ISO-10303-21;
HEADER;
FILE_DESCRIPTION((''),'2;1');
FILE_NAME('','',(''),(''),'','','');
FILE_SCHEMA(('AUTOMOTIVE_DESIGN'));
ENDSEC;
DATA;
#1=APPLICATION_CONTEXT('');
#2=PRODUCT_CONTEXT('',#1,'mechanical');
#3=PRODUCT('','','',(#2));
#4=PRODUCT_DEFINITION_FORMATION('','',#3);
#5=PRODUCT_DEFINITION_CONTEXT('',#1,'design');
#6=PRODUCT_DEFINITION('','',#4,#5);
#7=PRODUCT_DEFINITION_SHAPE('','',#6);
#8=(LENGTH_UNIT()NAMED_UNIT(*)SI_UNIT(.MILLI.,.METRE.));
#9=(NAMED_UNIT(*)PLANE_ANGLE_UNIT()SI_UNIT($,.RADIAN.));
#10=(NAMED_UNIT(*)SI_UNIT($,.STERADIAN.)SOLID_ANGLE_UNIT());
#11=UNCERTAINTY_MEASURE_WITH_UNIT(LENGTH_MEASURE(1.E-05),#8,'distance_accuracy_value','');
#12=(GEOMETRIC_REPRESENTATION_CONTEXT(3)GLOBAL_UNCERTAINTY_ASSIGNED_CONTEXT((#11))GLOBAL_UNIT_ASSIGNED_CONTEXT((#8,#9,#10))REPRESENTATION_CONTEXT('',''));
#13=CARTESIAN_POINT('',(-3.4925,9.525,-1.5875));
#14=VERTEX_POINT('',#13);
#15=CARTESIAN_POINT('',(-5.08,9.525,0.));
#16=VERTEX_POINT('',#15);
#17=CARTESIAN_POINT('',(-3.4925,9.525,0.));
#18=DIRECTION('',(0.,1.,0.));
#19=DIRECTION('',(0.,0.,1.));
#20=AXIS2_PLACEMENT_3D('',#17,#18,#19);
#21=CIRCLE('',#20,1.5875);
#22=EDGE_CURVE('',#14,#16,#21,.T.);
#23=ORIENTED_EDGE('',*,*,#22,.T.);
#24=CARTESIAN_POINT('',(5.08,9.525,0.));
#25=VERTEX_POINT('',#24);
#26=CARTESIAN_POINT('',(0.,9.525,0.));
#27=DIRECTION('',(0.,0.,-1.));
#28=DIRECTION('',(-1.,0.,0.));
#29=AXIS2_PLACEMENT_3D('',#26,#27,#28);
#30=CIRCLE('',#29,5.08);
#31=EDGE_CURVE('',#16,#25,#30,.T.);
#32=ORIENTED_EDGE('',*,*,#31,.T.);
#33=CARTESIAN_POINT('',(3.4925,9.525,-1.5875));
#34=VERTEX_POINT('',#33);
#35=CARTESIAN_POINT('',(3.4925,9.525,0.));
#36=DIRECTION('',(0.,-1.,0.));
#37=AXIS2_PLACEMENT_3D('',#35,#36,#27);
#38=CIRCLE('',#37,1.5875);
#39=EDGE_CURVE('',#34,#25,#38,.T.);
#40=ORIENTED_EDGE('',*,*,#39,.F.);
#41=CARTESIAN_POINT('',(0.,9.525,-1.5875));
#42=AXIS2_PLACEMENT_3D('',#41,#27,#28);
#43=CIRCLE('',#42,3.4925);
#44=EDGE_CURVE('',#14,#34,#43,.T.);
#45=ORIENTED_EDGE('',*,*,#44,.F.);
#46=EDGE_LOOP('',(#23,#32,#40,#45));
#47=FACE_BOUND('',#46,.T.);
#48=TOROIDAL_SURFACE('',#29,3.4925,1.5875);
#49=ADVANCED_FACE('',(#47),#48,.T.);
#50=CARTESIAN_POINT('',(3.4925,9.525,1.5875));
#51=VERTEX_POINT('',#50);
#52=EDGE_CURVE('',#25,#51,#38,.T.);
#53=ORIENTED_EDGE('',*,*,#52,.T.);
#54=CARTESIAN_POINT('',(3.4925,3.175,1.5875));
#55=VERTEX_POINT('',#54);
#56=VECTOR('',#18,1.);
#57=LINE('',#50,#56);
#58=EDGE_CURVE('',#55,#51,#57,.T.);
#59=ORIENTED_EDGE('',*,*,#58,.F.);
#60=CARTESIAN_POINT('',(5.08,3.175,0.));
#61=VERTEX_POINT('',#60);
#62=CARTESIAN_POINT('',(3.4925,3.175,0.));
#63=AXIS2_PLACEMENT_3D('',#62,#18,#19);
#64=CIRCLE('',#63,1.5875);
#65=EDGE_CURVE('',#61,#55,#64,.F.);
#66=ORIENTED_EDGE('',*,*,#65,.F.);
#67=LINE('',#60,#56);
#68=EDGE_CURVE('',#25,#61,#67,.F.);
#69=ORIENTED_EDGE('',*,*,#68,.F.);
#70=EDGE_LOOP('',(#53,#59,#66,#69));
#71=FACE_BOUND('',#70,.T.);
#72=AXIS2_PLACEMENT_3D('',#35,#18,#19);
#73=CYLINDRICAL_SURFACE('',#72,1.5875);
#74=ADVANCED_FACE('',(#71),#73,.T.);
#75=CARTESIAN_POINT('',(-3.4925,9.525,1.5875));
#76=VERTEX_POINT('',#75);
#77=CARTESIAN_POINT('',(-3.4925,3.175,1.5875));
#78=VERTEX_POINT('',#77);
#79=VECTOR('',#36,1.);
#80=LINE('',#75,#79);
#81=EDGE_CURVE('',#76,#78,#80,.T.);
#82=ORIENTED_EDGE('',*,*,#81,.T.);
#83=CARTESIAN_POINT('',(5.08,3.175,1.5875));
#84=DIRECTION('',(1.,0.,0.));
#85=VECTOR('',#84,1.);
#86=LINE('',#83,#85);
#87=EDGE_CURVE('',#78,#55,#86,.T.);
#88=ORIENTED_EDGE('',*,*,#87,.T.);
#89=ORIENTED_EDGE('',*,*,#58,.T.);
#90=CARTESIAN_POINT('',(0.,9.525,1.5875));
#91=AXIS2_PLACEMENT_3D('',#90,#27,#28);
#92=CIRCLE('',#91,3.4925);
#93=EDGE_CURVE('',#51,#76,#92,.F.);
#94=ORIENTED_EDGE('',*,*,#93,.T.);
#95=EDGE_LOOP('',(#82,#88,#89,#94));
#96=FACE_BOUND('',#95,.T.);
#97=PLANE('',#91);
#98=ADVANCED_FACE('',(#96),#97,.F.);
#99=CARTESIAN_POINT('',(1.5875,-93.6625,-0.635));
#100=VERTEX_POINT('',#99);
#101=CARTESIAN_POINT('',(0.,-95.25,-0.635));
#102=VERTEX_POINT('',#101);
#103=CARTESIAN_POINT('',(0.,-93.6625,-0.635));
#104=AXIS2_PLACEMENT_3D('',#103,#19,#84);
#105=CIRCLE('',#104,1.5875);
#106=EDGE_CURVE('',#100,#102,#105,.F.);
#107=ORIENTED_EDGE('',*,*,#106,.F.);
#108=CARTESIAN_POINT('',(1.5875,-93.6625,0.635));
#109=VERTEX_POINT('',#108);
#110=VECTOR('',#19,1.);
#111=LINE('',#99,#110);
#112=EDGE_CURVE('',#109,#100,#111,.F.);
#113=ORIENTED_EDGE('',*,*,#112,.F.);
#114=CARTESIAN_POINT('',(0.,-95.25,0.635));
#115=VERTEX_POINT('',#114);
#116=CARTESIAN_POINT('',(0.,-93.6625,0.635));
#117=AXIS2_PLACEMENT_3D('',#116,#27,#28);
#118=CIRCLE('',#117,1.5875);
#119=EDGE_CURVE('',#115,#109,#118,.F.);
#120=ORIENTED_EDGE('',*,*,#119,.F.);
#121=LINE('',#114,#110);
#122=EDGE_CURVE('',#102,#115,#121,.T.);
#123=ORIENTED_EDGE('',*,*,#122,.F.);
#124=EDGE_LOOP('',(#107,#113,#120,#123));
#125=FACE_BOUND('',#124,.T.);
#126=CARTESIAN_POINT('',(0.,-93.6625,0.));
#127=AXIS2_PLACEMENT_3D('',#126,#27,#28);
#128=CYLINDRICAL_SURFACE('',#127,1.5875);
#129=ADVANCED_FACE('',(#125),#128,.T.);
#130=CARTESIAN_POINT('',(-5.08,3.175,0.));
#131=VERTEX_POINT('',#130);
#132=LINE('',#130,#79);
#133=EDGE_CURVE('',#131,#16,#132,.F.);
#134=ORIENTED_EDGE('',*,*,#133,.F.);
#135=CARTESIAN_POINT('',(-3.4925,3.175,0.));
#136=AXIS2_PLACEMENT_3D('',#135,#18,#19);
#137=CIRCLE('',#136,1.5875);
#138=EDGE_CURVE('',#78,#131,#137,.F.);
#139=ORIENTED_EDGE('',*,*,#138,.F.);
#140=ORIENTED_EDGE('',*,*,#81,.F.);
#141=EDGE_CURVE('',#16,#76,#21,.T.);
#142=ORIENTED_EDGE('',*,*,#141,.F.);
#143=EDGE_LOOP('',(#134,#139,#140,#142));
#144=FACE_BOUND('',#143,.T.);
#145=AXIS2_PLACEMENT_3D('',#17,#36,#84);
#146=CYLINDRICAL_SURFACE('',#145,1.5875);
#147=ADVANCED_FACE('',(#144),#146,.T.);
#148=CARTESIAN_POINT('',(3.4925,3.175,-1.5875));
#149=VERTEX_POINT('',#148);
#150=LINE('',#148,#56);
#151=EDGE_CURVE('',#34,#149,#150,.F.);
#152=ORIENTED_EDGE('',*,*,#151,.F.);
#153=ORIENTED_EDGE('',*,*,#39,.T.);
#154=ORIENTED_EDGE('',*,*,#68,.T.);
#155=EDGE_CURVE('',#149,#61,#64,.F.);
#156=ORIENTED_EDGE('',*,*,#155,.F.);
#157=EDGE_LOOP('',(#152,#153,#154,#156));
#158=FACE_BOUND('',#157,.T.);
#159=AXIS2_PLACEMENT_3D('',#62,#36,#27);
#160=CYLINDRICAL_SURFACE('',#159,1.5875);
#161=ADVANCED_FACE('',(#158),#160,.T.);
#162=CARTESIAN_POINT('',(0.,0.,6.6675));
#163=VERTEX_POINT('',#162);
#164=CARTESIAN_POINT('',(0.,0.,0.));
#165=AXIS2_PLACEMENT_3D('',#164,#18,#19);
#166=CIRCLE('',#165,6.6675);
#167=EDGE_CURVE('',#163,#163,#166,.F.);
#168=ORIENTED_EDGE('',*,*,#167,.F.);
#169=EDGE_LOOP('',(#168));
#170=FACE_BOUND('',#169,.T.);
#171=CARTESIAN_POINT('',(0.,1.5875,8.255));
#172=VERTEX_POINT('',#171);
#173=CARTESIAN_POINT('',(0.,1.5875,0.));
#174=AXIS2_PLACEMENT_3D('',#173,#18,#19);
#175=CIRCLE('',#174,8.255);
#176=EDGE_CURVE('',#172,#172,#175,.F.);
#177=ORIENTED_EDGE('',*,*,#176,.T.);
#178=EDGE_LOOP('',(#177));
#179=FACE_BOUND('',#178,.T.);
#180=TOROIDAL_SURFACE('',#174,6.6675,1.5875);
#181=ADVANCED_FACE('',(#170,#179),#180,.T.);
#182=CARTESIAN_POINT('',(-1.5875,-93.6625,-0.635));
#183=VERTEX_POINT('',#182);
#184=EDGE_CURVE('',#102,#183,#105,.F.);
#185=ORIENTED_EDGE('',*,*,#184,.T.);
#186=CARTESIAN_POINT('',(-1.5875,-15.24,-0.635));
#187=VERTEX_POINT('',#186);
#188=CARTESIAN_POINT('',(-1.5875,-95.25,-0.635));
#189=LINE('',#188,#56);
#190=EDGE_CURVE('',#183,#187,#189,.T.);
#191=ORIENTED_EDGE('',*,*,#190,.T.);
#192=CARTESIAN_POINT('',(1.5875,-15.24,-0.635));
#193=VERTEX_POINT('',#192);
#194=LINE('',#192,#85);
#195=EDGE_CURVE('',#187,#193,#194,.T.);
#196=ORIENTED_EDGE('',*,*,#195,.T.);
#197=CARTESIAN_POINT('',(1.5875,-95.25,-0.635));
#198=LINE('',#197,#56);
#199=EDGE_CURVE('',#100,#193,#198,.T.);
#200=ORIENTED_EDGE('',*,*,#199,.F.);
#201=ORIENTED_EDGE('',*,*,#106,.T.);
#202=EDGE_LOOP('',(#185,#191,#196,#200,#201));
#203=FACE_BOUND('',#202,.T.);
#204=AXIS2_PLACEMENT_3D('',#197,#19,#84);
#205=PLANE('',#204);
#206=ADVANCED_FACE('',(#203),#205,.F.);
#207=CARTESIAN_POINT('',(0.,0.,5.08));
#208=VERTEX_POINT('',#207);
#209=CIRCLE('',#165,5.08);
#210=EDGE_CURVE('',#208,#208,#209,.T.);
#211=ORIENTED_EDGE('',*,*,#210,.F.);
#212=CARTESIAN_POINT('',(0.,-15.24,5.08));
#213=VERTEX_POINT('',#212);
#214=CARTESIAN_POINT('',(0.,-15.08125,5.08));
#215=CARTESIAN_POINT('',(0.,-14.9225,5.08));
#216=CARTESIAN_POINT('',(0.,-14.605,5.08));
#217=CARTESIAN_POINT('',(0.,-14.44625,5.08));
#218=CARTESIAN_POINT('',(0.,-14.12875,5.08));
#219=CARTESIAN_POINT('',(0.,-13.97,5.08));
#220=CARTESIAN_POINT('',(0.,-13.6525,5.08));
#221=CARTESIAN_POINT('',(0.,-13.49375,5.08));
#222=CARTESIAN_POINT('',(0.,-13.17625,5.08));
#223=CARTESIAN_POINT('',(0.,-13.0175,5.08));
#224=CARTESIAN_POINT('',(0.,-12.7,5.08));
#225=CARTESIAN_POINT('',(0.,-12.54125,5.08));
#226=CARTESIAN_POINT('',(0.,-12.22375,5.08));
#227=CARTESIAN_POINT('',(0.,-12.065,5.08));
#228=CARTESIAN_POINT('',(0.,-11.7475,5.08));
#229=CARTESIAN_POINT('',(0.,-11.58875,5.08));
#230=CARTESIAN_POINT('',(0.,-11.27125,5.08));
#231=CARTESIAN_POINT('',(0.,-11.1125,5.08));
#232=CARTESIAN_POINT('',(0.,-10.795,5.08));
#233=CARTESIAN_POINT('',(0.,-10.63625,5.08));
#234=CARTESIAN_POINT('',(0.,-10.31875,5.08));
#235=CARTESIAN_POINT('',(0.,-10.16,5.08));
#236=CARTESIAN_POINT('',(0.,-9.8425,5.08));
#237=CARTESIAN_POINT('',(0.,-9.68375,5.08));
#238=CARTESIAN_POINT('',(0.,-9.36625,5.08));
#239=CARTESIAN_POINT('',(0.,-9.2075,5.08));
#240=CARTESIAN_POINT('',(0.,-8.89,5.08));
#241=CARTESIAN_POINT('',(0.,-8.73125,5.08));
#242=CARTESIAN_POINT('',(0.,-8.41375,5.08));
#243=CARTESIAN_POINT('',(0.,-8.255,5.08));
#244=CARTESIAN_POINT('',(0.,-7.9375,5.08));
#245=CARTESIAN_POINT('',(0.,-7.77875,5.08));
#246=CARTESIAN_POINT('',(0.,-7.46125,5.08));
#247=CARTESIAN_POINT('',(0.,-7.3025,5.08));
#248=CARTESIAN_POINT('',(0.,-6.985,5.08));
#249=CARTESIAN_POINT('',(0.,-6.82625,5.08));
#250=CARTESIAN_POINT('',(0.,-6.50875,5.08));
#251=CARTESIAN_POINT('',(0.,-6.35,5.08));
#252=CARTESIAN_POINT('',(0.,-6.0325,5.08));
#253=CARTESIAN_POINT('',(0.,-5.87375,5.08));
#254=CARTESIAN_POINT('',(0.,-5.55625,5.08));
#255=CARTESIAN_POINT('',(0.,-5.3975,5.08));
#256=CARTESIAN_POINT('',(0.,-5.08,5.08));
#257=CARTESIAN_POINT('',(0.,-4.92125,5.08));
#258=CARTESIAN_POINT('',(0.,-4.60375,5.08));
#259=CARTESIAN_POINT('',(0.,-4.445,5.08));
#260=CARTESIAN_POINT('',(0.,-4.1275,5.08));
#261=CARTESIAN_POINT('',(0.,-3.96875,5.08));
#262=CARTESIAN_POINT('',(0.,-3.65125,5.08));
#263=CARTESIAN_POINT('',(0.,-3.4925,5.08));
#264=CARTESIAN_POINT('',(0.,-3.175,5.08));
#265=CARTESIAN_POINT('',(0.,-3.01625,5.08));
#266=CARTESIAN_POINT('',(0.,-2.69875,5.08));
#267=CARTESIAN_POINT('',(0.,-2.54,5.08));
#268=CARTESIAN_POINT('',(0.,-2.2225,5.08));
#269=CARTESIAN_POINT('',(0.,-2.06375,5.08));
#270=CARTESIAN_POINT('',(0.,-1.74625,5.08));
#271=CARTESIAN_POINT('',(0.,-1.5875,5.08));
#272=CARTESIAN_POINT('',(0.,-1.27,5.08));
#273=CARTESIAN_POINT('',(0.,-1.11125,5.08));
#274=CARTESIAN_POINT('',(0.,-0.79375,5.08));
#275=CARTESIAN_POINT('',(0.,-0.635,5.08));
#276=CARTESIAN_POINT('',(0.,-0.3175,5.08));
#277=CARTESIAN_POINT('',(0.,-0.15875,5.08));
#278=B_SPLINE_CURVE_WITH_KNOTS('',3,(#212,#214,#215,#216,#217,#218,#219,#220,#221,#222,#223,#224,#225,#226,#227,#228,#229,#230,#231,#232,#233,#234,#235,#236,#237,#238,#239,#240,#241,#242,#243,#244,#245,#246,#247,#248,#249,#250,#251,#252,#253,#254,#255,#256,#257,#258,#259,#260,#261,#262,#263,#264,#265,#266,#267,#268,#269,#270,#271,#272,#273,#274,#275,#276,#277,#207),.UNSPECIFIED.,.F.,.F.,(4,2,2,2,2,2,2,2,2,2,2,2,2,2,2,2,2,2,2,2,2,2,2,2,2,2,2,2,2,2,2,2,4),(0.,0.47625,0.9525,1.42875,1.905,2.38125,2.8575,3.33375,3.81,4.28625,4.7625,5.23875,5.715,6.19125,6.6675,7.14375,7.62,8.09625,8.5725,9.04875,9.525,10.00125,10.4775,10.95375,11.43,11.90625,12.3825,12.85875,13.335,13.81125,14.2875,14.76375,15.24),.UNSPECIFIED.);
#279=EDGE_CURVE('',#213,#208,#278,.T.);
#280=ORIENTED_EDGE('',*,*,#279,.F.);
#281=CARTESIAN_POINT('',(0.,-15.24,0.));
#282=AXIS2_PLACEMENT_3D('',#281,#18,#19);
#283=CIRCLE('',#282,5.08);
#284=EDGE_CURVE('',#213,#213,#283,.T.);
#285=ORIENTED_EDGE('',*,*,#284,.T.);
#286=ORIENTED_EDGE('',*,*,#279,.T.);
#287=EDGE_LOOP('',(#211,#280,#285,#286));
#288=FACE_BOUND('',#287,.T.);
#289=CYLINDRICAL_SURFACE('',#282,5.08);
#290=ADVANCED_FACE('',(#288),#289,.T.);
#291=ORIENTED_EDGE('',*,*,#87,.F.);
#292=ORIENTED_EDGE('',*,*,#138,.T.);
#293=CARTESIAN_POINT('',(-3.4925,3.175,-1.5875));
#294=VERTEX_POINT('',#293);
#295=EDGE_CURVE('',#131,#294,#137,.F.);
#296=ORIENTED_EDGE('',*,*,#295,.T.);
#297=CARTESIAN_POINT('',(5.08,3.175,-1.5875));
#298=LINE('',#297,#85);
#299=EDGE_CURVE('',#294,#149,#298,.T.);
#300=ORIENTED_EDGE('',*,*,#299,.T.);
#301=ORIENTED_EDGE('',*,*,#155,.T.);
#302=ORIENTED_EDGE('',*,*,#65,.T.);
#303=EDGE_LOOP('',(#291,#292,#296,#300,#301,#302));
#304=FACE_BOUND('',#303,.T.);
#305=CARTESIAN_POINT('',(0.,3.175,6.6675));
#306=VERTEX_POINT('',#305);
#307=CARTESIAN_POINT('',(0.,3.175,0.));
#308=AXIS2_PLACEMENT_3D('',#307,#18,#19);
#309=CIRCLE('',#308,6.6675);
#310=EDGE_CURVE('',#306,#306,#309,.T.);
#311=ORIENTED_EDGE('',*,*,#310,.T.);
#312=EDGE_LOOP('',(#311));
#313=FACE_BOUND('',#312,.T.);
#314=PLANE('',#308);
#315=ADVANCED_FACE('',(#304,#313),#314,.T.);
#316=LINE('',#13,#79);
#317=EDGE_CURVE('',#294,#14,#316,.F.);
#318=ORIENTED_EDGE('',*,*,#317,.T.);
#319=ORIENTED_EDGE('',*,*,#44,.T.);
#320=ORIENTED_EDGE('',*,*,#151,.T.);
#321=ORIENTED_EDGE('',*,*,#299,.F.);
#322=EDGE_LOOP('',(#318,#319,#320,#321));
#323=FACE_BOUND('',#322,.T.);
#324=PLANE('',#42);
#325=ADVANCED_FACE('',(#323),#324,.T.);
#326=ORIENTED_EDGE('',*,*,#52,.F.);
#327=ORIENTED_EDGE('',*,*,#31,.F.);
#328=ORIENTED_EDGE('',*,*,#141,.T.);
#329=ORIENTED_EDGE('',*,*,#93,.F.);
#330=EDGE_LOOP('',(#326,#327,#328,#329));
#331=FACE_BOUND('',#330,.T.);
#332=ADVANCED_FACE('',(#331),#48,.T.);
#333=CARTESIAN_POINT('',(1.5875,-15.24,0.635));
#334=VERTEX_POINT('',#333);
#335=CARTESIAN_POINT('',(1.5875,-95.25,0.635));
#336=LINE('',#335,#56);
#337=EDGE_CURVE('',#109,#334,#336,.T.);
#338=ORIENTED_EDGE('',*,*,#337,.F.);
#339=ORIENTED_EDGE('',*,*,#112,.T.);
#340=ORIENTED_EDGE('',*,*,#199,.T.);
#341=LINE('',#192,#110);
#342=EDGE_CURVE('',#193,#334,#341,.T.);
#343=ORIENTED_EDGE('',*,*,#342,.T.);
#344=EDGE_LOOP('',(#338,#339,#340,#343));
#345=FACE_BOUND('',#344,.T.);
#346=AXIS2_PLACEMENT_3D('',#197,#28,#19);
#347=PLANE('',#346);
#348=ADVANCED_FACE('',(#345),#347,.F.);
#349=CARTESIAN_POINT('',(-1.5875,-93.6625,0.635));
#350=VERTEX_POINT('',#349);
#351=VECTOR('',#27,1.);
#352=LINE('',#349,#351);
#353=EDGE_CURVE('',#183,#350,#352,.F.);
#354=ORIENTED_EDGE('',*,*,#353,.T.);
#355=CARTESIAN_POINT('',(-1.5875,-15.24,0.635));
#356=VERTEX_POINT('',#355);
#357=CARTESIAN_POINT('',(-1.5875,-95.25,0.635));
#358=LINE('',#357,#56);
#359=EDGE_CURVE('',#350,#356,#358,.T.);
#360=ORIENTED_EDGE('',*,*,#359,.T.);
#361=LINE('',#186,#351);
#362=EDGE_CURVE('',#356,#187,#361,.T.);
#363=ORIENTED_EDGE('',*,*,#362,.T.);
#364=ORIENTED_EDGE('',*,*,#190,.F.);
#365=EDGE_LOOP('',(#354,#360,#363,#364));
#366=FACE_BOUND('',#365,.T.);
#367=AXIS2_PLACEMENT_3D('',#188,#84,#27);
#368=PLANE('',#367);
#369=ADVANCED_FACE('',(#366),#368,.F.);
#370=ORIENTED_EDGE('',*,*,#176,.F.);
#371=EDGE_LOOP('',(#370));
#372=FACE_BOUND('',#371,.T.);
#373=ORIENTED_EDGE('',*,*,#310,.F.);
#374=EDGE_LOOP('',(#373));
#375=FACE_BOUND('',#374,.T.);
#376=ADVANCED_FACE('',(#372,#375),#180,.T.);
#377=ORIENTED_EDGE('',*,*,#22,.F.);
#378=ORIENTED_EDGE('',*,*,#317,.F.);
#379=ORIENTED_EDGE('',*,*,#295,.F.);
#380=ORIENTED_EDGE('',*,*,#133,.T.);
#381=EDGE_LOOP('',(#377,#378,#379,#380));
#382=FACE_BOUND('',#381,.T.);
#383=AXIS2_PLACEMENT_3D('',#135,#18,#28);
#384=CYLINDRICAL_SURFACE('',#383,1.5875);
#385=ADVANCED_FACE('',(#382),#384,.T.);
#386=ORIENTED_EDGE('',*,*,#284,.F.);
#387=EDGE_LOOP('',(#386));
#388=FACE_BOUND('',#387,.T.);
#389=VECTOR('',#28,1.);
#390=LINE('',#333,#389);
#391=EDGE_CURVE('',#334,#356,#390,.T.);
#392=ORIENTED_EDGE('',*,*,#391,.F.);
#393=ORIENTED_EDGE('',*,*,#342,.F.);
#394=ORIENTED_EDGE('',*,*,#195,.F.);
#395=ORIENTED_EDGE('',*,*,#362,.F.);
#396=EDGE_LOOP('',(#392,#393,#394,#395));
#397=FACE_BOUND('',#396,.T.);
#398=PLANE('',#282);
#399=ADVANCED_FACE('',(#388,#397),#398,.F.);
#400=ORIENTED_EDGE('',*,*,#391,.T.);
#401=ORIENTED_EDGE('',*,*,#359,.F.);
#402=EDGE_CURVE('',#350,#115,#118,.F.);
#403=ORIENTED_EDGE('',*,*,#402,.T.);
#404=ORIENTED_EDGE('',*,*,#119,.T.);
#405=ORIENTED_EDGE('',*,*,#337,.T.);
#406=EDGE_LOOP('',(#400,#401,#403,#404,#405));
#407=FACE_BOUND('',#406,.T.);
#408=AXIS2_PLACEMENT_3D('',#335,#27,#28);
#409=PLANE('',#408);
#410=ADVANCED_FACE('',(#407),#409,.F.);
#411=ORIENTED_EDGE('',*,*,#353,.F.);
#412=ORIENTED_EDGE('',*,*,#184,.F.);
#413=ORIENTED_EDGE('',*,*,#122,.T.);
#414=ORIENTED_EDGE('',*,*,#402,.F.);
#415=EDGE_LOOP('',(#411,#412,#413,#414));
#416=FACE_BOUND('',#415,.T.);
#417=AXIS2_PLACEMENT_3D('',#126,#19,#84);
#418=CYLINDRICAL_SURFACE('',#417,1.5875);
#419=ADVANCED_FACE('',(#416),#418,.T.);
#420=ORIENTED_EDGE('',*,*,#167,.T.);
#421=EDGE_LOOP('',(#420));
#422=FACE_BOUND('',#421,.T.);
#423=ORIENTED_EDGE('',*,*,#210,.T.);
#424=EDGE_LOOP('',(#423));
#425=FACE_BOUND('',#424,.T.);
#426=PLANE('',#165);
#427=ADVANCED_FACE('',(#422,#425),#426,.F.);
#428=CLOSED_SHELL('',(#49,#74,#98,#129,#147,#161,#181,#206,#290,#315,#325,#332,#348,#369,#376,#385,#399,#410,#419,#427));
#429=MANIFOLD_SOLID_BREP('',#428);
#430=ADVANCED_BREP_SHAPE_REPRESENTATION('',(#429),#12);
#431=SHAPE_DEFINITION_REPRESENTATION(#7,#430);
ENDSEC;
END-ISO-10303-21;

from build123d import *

# Parameters (mm, degrees)
SKETCH1_R           = 5.08
BOSS_EXTRUDE1_DEPTH = 15.24
SKETCH2_R           = 8.255
BOSS_EXTRUDE2_DEPTH = 3.175
BOSS_EXTRUDE3_DEPTH = 1.5875
FILLET1_R           = 1.5875
SKETCH4_W           = 3.175
SKETCH4_H           = 1.27
BOSS_EXTRUDE4_DEPTH = 80.01
FILLET3_R           = 1.5875


with BuildPart() as part:
    # Sketch1 → Boss-Extrude1 (new body)
    with BuildSketch(Plane(origin=(0, 0, 0), x_dir=(1, 0, 0), z_dir=(0, 1, 0))):
        with Locations(Location((0, 0, 0), (0, 0, 270))):
            Circle(SKETCH1_R)
    extrude(amount=-BOSS_EXTRUDE1_DEPTH)

    # Sketch2 → Boss-Extrude2 (add)
    with BuildSketch(Plane(origin=(0, 0, 0), x_dir=(1, 0, 0), z_dir=(0, 1, 0))):
        with Locations(Location((0, 0, 0), (0, 0, 270))):
            Circle(SKETCH2_R)
    extrude(amount=BOSS_EXTRUDE2_DEPTH)

    # Sketch3 → Boss-Extrude3 (add, symmetric)
    with BuildSketch(Plane.XY):
        with BuildLine():
            Line((5.08, 3.175), (-5.08, 3.175))
            Line((-5.08, 3.175), (-5.08, 9.525))
            ThreePointArc((-5.08, 9.525), (0, 14.605), (5.08, 9.525))
            Line((5.08, 9.525), (5.08, 3.175))
        make_face()
    extrude(amount=BOSS_EXTRUDE3_DEPTH, both=True)

    # Fillet1
    fillet1_edges = [part.edges().sort_by_distance(p)[0] for p in [
        (5.08, 6.35, -1.5875),
        (-5.08, 6.35, -1.5875),
        (-5.08, 6.35, 1.5875),
        (0, 14.605, 1.5875),
        (0, 0, -8.255),
        (0, 3.175, -8.255),
        (0, 14.605, -1.5875),
        (5.08, 6.35, 1.5875),
    ]]
    fillet(fillet1_edges, radius=FILLET1_R - 0.0001)  # a hair under: the kernel refuses the full size

    # Sketch4 → Boss-Extrude4 (add)
    with BuildSketch(Plane.XZ.offset(15.24)):
        Rectangle(SKETCH4_W, SKETCH4_H)
    extrude(amount=BOSS_EXTRUDE4_DEPTH)

    # Fillet3
    fillet3_edges = [part.edges().sort_by_distance(p)[0] for p in [
        (-1.5875, -95.25, 0),
        (1.5875, -95.25, 0),
    ]]
    fillet(fillet3_edges, radius=FILLET3_R - 0.0001)  # a hair under: the kernel refuses the full size


solid = part.part
